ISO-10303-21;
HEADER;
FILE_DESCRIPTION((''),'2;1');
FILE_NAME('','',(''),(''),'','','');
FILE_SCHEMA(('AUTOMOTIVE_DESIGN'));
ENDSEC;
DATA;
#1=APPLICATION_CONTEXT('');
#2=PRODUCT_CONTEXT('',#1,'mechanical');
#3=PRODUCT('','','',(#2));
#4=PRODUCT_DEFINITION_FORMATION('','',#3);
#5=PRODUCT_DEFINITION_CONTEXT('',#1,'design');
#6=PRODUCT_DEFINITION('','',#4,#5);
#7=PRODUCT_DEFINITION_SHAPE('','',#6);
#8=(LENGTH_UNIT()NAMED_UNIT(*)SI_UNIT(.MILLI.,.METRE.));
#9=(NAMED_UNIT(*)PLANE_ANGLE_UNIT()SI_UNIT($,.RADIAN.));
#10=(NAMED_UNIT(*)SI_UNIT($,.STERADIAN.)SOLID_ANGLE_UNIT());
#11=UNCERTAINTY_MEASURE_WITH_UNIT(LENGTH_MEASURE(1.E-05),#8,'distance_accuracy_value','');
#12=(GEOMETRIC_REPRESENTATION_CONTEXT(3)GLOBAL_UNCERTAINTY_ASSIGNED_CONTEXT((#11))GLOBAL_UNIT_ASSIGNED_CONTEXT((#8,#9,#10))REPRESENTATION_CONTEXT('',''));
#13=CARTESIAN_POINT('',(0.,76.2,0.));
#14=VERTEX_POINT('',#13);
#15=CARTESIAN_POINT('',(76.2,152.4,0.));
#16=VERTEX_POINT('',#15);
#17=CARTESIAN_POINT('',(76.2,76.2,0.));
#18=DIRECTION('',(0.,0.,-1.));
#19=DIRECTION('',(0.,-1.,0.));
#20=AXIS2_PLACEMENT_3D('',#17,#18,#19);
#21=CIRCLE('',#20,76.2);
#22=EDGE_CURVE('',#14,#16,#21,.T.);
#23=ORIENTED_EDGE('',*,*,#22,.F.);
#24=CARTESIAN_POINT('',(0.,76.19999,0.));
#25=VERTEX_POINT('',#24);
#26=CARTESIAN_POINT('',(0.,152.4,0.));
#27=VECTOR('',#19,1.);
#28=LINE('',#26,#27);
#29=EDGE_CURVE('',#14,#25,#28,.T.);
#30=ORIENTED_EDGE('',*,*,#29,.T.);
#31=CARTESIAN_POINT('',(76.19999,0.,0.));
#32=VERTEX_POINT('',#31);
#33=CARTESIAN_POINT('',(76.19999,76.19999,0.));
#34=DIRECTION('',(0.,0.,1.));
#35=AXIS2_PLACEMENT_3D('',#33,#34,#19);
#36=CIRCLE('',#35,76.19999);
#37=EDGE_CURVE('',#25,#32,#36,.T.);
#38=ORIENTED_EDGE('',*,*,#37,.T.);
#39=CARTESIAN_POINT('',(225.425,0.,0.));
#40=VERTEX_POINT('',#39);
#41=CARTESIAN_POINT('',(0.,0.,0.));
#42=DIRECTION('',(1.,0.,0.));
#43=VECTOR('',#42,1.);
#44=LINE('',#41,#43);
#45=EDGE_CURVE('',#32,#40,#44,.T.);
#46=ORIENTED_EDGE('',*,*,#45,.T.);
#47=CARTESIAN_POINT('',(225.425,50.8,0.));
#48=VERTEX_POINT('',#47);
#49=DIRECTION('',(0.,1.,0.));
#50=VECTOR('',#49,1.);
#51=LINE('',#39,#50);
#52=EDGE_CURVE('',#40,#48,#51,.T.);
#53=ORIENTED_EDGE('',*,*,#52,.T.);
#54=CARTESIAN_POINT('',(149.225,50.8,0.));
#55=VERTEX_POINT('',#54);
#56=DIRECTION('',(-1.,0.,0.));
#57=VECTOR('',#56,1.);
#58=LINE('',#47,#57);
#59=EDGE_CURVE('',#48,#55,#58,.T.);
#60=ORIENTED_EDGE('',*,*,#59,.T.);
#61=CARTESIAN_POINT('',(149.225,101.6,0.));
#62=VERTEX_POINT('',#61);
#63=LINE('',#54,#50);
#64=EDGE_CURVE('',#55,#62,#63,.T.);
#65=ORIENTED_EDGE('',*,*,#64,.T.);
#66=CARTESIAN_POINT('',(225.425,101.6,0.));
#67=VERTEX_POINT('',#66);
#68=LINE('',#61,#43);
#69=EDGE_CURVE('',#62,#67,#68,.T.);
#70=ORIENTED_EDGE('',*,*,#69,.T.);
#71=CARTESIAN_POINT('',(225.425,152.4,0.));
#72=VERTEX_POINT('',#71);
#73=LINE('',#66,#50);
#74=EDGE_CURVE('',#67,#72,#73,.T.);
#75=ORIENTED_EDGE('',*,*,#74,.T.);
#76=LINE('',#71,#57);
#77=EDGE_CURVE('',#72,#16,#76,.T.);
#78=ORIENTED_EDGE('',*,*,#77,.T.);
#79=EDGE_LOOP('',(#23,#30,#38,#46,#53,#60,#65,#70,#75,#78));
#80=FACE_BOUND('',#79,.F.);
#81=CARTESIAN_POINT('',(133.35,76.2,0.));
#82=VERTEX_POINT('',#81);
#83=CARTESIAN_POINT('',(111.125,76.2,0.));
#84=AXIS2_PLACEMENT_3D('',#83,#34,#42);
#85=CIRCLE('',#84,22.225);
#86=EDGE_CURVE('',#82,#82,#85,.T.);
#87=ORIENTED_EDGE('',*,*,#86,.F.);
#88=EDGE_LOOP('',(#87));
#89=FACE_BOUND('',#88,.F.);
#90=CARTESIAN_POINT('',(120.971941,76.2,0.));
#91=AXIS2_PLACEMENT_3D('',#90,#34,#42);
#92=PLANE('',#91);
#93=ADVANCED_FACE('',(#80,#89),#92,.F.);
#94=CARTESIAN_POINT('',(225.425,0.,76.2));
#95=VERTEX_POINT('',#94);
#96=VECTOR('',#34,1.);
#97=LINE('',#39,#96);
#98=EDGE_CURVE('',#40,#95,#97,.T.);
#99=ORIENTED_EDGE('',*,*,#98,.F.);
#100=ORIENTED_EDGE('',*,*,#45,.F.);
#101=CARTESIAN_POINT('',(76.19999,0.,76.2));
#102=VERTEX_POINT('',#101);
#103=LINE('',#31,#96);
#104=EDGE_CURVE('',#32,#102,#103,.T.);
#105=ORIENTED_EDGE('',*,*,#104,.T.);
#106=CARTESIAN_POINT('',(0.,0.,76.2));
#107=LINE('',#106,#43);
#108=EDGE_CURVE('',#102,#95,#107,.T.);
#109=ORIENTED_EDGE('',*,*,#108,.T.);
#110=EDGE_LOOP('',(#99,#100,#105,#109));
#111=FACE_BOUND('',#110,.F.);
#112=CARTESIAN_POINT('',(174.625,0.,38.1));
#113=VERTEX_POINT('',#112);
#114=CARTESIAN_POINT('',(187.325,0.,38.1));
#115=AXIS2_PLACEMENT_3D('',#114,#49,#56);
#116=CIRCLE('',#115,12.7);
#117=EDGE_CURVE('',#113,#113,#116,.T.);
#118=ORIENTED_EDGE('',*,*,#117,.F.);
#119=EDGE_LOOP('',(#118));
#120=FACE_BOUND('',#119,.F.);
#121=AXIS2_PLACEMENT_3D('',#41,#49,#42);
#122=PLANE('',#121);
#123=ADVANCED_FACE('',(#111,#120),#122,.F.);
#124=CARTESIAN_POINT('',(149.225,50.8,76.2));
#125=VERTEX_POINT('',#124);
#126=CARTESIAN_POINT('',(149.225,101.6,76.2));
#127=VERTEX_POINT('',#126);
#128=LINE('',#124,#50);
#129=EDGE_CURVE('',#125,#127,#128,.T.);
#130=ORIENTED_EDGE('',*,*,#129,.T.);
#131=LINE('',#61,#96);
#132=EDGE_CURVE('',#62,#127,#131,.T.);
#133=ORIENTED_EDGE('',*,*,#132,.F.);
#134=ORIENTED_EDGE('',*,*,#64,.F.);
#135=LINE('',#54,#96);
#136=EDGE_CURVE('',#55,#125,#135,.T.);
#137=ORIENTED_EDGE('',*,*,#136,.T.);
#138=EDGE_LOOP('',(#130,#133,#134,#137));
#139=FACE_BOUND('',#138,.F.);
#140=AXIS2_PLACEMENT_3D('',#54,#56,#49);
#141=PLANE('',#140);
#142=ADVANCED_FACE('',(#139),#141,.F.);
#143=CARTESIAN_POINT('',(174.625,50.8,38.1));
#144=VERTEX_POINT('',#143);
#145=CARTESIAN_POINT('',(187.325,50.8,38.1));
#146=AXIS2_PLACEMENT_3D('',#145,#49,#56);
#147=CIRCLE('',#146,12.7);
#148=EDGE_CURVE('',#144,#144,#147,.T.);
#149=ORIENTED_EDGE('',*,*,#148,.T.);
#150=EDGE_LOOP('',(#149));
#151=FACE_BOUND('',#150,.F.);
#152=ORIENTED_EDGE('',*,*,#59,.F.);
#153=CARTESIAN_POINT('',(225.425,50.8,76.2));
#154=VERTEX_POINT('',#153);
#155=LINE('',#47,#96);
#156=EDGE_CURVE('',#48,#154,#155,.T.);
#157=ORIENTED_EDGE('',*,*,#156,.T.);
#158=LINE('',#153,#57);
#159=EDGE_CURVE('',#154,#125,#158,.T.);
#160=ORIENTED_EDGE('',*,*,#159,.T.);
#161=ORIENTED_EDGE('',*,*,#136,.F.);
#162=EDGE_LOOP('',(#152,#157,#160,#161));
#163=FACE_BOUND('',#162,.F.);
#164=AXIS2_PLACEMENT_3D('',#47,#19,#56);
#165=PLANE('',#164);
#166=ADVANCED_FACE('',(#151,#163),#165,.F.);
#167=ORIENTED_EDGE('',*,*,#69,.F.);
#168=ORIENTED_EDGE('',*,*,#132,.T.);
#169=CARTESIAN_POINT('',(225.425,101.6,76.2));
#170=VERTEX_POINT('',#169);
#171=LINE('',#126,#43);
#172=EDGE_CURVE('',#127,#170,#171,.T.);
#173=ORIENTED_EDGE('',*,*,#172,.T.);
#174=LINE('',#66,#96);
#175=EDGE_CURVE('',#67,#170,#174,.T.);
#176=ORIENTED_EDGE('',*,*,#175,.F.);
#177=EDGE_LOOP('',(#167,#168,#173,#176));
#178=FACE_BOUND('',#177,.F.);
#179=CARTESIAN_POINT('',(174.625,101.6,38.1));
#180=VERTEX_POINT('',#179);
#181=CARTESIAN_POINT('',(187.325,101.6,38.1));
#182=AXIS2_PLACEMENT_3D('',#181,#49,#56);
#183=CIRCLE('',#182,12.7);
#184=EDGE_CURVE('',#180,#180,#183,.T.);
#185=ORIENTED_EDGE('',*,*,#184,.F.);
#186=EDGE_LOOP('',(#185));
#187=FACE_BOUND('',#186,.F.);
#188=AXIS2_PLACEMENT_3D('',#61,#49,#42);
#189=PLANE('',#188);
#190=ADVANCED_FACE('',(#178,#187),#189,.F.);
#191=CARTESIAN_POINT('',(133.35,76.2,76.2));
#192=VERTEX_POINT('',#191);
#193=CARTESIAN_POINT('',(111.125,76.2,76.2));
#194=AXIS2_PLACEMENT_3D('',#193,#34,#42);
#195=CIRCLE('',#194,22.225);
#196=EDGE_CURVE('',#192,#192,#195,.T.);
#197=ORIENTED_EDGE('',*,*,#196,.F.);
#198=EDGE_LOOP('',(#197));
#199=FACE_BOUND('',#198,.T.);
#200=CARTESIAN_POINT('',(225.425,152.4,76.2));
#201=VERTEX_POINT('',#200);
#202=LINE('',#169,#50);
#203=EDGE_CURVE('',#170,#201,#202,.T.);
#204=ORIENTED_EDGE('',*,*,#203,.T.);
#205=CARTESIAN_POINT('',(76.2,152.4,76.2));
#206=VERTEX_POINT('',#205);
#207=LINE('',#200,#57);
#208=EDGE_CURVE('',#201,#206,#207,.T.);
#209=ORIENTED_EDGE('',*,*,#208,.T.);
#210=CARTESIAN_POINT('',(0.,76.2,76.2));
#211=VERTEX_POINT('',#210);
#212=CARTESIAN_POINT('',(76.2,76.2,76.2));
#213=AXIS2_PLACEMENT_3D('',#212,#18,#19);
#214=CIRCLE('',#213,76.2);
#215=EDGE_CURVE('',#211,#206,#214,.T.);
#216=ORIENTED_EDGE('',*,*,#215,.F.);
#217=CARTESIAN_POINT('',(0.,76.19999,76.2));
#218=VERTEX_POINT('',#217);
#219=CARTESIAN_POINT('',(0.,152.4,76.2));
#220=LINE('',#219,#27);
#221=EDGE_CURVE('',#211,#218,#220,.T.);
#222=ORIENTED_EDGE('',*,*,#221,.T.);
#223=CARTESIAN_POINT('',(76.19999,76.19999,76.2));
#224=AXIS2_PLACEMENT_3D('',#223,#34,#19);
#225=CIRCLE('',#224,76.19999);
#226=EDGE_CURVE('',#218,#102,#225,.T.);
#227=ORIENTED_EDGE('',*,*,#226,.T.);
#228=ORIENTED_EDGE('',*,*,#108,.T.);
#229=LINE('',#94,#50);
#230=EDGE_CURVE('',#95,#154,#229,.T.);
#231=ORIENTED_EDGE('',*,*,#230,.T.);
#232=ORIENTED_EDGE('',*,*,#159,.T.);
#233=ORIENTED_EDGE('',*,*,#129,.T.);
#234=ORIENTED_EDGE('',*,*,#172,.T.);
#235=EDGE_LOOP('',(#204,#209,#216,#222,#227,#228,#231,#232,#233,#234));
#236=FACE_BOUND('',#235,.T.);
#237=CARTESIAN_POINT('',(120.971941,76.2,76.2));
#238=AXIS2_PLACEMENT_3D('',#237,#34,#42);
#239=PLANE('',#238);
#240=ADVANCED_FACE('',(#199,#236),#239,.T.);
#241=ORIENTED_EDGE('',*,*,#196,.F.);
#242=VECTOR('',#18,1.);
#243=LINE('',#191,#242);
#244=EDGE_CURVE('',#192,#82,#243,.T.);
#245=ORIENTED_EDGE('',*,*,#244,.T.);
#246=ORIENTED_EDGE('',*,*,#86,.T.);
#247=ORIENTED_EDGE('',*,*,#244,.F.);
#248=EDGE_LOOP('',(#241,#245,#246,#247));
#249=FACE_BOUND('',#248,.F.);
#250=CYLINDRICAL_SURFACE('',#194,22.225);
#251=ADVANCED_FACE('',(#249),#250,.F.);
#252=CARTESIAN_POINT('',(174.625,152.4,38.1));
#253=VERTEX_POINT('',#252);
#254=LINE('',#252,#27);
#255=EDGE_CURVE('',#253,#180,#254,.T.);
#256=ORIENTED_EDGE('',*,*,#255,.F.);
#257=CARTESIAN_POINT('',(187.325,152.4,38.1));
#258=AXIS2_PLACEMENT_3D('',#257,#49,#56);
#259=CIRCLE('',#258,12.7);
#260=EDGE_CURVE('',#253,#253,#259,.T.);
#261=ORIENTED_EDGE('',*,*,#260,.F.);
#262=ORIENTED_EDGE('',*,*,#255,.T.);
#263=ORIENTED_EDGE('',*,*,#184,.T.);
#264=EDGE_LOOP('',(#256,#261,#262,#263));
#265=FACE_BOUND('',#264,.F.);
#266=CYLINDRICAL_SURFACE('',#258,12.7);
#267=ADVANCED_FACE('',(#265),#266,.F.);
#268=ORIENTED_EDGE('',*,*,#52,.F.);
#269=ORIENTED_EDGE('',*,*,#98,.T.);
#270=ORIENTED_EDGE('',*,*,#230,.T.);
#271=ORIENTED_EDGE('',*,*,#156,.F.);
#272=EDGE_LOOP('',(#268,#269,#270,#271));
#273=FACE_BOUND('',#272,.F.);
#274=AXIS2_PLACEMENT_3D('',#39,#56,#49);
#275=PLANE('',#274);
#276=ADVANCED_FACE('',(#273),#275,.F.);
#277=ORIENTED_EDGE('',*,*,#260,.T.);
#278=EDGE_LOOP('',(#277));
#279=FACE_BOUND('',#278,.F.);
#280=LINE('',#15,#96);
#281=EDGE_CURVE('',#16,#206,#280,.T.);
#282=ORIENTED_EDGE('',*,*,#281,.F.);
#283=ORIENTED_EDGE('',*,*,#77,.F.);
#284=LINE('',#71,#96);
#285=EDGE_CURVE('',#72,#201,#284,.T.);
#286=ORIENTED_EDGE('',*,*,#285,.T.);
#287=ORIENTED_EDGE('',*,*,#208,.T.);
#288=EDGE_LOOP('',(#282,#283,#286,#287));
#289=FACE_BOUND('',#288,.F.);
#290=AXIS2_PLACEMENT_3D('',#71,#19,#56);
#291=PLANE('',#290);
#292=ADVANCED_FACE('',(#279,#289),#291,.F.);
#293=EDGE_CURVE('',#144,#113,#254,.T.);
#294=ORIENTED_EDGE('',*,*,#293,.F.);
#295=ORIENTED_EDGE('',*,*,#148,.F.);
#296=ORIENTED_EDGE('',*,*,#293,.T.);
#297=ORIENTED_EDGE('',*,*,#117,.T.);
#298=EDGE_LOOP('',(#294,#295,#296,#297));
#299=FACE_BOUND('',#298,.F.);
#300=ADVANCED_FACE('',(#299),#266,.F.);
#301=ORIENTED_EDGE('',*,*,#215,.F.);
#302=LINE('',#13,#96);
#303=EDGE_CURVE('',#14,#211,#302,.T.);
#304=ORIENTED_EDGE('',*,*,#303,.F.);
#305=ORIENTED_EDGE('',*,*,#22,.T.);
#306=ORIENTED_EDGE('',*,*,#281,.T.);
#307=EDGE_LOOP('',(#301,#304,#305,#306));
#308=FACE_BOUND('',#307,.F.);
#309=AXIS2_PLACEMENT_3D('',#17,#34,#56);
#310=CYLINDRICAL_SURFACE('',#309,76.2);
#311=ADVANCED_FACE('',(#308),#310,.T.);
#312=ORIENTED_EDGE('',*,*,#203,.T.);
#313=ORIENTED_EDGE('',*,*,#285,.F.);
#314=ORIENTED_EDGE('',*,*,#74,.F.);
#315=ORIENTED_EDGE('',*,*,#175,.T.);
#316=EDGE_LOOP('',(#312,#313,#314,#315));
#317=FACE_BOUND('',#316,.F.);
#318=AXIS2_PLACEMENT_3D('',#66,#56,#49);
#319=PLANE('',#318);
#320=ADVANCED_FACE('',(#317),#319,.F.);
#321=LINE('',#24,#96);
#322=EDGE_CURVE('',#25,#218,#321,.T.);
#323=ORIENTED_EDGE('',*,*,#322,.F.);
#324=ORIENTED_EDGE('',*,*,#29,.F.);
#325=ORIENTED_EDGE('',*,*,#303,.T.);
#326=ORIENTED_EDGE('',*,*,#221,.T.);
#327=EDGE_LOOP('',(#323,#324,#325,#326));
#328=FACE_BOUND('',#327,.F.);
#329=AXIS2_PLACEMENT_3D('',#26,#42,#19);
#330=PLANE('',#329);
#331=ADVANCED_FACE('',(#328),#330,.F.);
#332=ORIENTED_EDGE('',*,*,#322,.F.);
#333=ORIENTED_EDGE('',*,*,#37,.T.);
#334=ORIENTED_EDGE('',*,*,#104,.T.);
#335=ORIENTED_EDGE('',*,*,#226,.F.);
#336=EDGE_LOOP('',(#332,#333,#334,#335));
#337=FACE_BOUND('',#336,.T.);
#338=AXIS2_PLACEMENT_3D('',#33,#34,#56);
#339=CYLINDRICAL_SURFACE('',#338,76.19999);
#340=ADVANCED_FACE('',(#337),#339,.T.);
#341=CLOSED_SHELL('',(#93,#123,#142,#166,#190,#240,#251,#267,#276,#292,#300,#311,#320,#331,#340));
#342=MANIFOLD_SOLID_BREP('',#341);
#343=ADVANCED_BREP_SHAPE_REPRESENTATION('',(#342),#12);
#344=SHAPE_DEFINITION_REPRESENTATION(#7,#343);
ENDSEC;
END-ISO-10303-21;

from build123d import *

# Parameters (mm, degrees)
F1_DEPTH = 76.2
F2_R     = 76.2
F3_R     = 76.19999
F5_R     = 12.7
F6_DEPTH = 152.4
F4_R     = 22.225
F7_DEPTH = 76.2


# Not quite as in the source:
# - a fillet or chamfer is up to 0.001 mm smaller than in the source, because OpenCascade refuses the exact size


with BuildPart() as f1:
    # F0 (on Top) → F1 (new body)
    with BuildSketch(Plane.XY):
        Polygon((0, 152.4), (0, 0), (225.425, 0), (225.425, 50.8), (149.225, 50.8), (149.225, 101.6), (225.425, 101.6), (225.425, 152.4), align=None)
    extrude(amount=F1_DEPTH)

    # F2
    f2_edges = [f1.edges().sort_by_distance(p)[0] for p in [
        (0, 152.4, 38.1),
    ]]
    fillet(f2_edges, radius=F2_R)

    # F3 (radius 76.2 in the source; OpenCascade refuses exactly that, so slightly less here)
    f3_edges = [f1.edges().sort_by_distance(p)[0] for p in [
        (0, 0, 38.1),
    ]]
    fillet(f3_edges, radius=F3_R)

    # F5 (on face) → F6 (cut)
    with BuildSketch(Plane(origin=(0, 152.4, 0), x_dir=(-1, 0, 0), z_dir=(0, 1, 0))):
        with Locations((-187.325, 38.1)):
            Circle(F5_R)
    extrude(amount=-F6_DEPTH, mode=Mode.SUBTRACT)

    # F4 (on face) → F7 (cut)
    with BuildSketch(Plane.XY.offset(76.2)):
        with Locations((111.125, 76.2)):
            Circle(F4_R)
    extrude(amount=-F7_DEPTH, mode=Mode.SUBTRACT)


solid = f1.part
